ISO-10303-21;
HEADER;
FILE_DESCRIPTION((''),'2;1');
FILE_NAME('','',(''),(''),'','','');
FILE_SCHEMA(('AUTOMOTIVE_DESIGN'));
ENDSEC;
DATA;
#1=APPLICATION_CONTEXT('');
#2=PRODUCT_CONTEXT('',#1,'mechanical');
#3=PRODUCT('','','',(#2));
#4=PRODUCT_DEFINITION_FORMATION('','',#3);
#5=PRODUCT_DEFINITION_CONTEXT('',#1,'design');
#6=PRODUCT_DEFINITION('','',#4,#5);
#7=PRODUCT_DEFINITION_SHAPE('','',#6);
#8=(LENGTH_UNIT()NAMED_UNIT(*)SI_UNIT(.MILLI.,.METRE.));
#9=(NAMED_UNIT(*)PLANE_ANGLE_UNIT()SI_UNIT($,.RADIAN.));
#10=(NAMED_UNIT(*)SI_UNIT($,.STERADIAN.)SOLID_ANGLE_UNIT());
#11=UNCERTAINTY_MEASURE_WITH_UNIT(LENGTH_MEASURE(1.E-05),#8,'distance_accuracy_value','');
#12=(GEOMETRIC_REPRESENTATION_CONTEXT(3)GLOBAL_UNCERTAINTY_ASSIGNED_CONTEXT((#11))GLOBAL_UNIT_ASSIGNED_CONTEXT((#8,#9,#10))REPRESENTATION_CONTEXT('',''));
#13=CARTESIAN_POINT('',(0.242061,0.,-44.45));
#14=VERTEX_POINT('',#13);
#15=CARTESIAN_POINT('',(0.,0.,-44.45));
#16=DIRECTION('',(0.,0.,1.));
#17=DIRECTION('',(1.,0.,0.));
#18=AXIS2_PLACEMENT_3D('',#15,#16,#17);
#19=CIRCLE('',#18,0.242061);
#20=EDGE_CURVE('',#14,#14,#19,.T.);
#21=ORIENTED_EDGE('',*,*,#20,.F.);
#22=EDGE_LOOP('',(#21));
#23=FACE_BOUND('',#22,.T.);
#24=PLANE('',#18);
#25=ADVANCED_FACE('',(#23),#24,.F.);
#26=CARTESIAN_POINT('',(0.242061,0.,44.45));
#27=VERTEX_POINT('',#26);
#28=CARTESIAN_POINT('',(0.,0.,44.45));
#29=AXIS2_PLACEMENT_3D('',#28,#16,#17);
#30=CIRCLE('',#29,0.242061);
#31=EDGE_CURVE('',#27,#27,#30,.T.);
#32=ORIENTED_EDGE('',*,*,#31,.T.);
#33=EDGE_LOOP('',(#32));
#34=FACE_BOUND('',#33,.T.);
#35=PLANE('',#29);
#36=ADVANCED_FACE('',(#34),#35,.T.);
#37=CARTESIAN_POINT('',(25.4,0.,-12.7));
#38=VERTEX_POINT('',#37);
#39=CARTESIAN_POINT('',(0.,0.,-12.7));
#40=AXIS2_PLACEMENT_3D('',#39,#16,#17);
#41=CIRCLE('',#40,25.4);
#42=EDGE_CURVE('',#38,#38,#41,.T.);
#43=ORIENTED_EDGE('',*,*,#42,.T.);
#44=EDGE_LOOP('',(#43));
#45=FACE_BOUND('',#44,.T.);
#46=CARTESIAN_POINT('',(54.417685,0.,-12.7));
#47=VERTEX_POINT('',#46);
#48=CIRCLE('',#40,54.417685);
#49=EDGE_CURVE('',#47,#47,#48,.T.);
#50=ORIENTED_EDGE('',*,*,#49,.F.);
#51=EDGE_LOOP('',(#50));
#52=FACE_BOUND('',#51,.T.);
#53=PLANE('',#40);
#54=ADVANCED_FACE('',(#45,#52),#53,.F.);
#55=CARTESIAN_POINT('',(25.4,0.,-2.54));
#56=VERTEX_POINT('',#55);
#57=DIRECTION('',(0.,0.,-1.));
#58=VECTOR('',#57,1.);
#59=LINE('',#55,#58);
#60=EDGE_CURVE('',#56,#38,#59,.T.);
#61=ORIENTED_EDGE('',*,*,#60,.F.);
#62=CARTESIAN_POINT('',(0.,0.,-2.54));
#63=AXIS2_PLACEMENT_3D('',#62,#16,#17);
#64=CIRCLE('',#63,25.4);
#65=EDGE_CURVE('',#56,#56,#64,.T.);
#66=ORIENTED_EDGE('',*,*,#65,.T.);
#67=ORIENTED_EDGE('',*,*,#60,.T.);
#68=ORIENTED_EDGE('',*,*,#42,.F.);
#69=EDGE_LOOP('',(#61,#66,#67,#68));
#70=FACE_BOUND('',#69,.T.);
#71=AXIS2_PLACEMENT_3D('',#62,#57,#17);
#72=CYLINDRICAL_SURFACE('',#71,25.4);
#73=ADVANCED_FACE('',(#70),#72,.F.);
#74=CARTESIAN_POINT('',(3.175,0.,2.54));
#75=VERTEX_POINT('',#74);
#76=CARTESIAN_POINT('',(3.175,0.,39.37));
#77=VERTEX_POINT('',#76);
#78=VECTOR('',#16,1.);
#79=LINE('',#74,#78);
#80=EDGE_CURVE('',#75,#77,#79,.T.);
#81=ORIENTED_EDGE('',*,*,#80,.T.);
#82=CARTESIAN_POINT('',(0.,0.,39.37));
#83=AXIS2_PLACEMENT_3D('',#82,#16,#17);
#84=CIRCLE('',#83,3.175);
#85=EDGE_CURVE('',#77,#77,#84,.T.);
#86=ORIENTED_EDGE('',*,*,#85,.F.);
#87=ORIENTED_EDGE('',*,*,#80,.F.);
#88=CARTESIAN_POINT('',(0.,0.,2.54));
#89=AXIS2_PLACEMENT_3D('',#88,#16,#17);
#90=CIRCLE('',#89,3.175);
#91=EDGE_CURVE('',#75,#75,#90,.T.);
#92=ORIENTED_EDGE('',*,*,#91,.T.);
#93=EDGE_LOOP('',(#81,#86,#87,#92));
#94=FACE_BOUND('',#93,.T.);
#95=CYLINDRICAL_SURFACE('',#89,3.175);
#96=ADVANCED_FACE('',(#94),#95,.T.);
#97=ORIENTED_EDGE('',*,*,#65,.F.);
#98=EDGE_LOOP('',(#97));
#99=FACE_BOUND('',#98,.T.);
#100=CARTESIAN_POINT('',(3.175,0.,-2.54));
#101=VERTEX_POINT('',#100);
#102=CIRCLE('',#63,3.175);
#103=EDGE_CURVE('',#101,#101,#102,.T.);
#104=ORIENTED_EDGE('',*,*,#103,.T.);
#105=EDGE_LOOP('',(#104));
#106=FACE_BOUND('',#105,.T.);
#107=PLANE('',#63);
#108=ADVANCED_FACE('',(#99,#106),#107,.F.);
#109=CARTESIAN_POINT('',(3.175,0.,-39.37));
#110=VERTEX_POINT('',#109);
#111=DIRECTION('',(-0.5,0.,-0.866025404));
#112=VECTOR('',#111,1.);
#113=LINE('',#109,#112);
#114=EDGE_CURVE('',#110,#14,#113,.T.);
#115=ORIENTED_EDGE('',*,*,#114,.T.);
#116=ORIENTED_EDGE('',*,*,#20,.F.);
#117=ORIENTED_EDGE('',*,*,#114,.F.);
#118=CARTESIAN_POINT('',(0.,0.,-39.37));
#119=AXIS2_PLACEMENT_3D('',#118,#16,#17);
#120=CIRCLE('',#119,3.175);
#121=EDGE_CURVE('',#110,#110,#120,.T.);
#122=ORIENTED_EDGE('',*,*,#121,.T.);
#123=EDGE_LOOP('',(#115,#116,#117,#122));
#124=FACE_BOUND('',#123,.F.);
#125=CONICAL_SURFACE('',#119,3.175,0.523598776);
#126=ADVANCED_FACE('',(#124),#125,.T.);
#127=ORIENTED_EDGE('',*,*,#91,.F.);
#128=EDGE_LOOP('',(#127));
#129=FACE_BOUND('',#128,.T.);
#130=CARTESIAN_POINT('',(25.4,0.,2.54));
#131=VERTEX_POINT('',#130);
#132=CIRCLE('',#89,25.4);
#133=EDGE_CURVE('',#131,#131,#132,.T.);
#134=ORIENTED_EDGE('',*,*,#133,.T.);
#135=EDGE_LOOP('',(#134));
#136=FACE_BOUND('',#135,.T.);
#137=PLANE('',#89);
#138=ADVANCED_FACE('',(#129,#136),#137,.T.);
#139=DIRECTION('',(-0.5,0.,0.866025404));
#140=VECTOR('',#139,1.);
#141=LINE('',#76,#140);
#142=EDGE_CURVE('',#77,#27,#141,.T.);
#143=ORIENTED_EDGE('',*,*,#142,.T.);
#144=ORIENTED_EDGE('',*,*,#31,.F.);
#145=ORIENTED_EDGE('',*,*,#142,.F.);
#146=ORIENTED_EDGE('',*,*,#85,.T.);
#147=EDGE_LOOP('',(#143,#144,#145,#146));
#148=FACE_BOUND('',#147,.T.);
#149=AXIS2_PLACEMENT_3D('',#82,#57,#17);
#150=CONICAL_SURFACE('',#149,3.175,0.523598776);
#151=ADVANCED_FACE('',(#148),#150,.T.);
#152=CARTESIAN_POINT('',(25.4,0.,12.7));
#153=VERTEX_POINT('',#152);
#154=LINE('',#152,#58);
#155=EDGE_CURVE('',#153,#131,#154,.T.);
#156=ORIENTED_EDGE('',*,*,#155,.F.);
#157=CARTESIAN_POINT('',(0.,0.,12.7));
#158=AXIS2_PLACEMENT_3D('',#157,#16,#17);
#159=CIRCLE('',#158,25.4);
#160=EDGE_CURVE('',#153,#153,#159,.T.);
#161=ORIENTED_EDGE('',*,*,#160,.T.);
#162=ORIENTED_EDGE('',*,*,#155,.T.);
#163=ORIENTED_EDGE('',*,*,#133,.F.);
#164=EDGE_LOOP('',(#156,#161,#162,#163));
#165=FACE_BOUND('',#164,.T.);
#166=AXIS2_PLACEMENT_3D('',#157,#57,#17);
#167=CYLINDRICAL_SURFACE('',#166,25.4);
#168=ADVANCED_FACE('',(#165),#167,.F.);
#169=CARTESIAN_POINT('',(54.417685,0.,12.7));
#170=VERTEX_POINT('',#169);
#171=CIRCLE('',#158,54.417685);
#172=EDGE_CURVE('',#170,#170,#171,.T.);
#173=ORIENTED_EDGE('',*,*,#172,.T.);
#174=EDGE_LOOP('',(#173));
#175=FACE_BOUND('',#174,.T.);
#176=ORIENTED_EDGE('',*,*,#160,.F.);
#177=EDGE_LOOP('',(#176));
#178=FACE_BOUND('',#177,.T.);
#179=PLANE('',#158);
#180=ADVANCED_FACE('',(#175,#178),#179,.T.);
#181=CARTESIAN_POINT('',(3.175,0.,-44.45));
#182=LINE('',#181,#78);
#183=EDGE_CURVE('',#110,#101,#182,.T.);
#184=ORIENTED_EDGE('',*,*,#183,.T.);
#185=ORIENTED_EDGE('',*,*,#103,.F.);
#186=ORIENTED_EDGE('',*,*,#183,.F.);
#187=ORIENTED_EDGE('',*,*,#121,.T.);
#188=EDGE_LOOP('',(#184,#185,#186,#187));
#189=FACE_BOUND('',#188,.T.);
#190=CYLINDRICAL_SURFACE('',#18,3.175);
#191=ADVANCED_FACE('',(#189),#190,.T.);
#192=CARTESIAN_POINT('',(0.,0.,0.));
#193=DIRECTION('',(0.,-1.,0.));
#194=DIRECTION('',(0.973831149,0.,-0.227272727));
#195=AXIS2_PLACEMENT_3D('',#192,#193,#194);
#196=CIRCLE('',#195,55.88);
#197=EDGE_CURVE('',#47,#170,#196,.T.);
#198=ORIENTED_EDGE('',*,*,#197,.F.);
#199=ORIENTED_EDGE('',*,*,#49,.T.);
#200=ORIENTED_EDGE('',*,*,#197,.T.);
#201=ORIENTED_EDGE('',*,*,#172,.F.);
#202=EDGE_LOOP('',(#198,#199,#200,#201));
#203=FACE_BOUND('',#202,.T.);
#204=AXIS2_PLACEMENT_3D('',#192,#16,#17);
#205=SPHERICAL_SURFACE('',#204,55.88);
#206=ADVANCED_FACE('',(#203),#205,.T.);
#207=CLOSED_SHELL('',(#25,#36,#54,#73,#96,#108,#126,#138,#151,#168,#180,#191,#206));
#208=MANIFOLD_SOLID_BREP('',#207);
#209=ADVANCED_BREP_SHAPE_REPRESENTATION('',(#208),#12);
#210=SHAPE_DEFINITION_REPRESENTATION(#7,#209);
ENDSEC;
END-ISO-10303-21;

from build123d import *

# Parameters (mm, degrees)
F3_SIZE2 = 2.9329393675
F3_SIZE  = 5.08


# Not quite as in the source:
# - a fillet or chamfer that OpenCascade refuses, or shapes differently, is made with other operations: its cross-section is extruded or revolved along the edge and cut away or added


with BuildPart() as f1:
    # F0 (on Front) → F1 (revolve)
    with BuildSketch(Plane.XZ):
        Polygon((3.175, 44.45), (0, 44.45), (0, 0), (50.8, 0), (50.8, 12.7), (25.478093854, 12.7), (25.4, 12.7), (25.4, 2.54), (3.175, 2.54), align=None)
        Polygon((50.8, 0), (0, 0), (0, -44.45), (3.175, -44.45), (3.175, -2.54), (25.4, -2.54), (25.4, -12.7), (50.8, -12.7), align=None)
    revolve(axis=Axis((0, 0, 0), (0, 0, 1)))

    # F2: chamfer of 5.08 x 2.9329393675 on 1 edges, made by hand

    # F2_s1 → F2_t2 (revolve, cut)
    with BuildSketch(Plane.XZ):
        Polygon((3.175, 39.37), (0.2420606325, 44.45), (3.175, 44.45), align=None)
    revolve(axis=Axis((0, 0, 44.45), (0, 0, 1)), mode=Mode.SUBTRACT)

    # F3
    f3_edges = [f1.edges().sort_by_distance(p)[0] for p in [
        (-3.175, 0, -44.45),
    ]]
    chamfer(f3_edges, length=F3_SIZE, length2=F3_SIZE2)

    # F4 (on Front) → F5 (revolve)
    with BuildSketch(Plane.XZ):
        with BuildLine():
            Line((50.8, -12.7), (54.4176846255, -12.7))
            ThreePointArc((54.4176846255, -12.7), (55.88, 0), (54.4176846255, 12.7))
            Line((54.4176846255, 12.7), (50.8, 12.7))
            Line((50.8, 12.7), (50.8, -12.7))
        make_face()
    revolve(axis=Axis((0, 0, 12.7), (0, 0, 1)))


solid = f1.part
